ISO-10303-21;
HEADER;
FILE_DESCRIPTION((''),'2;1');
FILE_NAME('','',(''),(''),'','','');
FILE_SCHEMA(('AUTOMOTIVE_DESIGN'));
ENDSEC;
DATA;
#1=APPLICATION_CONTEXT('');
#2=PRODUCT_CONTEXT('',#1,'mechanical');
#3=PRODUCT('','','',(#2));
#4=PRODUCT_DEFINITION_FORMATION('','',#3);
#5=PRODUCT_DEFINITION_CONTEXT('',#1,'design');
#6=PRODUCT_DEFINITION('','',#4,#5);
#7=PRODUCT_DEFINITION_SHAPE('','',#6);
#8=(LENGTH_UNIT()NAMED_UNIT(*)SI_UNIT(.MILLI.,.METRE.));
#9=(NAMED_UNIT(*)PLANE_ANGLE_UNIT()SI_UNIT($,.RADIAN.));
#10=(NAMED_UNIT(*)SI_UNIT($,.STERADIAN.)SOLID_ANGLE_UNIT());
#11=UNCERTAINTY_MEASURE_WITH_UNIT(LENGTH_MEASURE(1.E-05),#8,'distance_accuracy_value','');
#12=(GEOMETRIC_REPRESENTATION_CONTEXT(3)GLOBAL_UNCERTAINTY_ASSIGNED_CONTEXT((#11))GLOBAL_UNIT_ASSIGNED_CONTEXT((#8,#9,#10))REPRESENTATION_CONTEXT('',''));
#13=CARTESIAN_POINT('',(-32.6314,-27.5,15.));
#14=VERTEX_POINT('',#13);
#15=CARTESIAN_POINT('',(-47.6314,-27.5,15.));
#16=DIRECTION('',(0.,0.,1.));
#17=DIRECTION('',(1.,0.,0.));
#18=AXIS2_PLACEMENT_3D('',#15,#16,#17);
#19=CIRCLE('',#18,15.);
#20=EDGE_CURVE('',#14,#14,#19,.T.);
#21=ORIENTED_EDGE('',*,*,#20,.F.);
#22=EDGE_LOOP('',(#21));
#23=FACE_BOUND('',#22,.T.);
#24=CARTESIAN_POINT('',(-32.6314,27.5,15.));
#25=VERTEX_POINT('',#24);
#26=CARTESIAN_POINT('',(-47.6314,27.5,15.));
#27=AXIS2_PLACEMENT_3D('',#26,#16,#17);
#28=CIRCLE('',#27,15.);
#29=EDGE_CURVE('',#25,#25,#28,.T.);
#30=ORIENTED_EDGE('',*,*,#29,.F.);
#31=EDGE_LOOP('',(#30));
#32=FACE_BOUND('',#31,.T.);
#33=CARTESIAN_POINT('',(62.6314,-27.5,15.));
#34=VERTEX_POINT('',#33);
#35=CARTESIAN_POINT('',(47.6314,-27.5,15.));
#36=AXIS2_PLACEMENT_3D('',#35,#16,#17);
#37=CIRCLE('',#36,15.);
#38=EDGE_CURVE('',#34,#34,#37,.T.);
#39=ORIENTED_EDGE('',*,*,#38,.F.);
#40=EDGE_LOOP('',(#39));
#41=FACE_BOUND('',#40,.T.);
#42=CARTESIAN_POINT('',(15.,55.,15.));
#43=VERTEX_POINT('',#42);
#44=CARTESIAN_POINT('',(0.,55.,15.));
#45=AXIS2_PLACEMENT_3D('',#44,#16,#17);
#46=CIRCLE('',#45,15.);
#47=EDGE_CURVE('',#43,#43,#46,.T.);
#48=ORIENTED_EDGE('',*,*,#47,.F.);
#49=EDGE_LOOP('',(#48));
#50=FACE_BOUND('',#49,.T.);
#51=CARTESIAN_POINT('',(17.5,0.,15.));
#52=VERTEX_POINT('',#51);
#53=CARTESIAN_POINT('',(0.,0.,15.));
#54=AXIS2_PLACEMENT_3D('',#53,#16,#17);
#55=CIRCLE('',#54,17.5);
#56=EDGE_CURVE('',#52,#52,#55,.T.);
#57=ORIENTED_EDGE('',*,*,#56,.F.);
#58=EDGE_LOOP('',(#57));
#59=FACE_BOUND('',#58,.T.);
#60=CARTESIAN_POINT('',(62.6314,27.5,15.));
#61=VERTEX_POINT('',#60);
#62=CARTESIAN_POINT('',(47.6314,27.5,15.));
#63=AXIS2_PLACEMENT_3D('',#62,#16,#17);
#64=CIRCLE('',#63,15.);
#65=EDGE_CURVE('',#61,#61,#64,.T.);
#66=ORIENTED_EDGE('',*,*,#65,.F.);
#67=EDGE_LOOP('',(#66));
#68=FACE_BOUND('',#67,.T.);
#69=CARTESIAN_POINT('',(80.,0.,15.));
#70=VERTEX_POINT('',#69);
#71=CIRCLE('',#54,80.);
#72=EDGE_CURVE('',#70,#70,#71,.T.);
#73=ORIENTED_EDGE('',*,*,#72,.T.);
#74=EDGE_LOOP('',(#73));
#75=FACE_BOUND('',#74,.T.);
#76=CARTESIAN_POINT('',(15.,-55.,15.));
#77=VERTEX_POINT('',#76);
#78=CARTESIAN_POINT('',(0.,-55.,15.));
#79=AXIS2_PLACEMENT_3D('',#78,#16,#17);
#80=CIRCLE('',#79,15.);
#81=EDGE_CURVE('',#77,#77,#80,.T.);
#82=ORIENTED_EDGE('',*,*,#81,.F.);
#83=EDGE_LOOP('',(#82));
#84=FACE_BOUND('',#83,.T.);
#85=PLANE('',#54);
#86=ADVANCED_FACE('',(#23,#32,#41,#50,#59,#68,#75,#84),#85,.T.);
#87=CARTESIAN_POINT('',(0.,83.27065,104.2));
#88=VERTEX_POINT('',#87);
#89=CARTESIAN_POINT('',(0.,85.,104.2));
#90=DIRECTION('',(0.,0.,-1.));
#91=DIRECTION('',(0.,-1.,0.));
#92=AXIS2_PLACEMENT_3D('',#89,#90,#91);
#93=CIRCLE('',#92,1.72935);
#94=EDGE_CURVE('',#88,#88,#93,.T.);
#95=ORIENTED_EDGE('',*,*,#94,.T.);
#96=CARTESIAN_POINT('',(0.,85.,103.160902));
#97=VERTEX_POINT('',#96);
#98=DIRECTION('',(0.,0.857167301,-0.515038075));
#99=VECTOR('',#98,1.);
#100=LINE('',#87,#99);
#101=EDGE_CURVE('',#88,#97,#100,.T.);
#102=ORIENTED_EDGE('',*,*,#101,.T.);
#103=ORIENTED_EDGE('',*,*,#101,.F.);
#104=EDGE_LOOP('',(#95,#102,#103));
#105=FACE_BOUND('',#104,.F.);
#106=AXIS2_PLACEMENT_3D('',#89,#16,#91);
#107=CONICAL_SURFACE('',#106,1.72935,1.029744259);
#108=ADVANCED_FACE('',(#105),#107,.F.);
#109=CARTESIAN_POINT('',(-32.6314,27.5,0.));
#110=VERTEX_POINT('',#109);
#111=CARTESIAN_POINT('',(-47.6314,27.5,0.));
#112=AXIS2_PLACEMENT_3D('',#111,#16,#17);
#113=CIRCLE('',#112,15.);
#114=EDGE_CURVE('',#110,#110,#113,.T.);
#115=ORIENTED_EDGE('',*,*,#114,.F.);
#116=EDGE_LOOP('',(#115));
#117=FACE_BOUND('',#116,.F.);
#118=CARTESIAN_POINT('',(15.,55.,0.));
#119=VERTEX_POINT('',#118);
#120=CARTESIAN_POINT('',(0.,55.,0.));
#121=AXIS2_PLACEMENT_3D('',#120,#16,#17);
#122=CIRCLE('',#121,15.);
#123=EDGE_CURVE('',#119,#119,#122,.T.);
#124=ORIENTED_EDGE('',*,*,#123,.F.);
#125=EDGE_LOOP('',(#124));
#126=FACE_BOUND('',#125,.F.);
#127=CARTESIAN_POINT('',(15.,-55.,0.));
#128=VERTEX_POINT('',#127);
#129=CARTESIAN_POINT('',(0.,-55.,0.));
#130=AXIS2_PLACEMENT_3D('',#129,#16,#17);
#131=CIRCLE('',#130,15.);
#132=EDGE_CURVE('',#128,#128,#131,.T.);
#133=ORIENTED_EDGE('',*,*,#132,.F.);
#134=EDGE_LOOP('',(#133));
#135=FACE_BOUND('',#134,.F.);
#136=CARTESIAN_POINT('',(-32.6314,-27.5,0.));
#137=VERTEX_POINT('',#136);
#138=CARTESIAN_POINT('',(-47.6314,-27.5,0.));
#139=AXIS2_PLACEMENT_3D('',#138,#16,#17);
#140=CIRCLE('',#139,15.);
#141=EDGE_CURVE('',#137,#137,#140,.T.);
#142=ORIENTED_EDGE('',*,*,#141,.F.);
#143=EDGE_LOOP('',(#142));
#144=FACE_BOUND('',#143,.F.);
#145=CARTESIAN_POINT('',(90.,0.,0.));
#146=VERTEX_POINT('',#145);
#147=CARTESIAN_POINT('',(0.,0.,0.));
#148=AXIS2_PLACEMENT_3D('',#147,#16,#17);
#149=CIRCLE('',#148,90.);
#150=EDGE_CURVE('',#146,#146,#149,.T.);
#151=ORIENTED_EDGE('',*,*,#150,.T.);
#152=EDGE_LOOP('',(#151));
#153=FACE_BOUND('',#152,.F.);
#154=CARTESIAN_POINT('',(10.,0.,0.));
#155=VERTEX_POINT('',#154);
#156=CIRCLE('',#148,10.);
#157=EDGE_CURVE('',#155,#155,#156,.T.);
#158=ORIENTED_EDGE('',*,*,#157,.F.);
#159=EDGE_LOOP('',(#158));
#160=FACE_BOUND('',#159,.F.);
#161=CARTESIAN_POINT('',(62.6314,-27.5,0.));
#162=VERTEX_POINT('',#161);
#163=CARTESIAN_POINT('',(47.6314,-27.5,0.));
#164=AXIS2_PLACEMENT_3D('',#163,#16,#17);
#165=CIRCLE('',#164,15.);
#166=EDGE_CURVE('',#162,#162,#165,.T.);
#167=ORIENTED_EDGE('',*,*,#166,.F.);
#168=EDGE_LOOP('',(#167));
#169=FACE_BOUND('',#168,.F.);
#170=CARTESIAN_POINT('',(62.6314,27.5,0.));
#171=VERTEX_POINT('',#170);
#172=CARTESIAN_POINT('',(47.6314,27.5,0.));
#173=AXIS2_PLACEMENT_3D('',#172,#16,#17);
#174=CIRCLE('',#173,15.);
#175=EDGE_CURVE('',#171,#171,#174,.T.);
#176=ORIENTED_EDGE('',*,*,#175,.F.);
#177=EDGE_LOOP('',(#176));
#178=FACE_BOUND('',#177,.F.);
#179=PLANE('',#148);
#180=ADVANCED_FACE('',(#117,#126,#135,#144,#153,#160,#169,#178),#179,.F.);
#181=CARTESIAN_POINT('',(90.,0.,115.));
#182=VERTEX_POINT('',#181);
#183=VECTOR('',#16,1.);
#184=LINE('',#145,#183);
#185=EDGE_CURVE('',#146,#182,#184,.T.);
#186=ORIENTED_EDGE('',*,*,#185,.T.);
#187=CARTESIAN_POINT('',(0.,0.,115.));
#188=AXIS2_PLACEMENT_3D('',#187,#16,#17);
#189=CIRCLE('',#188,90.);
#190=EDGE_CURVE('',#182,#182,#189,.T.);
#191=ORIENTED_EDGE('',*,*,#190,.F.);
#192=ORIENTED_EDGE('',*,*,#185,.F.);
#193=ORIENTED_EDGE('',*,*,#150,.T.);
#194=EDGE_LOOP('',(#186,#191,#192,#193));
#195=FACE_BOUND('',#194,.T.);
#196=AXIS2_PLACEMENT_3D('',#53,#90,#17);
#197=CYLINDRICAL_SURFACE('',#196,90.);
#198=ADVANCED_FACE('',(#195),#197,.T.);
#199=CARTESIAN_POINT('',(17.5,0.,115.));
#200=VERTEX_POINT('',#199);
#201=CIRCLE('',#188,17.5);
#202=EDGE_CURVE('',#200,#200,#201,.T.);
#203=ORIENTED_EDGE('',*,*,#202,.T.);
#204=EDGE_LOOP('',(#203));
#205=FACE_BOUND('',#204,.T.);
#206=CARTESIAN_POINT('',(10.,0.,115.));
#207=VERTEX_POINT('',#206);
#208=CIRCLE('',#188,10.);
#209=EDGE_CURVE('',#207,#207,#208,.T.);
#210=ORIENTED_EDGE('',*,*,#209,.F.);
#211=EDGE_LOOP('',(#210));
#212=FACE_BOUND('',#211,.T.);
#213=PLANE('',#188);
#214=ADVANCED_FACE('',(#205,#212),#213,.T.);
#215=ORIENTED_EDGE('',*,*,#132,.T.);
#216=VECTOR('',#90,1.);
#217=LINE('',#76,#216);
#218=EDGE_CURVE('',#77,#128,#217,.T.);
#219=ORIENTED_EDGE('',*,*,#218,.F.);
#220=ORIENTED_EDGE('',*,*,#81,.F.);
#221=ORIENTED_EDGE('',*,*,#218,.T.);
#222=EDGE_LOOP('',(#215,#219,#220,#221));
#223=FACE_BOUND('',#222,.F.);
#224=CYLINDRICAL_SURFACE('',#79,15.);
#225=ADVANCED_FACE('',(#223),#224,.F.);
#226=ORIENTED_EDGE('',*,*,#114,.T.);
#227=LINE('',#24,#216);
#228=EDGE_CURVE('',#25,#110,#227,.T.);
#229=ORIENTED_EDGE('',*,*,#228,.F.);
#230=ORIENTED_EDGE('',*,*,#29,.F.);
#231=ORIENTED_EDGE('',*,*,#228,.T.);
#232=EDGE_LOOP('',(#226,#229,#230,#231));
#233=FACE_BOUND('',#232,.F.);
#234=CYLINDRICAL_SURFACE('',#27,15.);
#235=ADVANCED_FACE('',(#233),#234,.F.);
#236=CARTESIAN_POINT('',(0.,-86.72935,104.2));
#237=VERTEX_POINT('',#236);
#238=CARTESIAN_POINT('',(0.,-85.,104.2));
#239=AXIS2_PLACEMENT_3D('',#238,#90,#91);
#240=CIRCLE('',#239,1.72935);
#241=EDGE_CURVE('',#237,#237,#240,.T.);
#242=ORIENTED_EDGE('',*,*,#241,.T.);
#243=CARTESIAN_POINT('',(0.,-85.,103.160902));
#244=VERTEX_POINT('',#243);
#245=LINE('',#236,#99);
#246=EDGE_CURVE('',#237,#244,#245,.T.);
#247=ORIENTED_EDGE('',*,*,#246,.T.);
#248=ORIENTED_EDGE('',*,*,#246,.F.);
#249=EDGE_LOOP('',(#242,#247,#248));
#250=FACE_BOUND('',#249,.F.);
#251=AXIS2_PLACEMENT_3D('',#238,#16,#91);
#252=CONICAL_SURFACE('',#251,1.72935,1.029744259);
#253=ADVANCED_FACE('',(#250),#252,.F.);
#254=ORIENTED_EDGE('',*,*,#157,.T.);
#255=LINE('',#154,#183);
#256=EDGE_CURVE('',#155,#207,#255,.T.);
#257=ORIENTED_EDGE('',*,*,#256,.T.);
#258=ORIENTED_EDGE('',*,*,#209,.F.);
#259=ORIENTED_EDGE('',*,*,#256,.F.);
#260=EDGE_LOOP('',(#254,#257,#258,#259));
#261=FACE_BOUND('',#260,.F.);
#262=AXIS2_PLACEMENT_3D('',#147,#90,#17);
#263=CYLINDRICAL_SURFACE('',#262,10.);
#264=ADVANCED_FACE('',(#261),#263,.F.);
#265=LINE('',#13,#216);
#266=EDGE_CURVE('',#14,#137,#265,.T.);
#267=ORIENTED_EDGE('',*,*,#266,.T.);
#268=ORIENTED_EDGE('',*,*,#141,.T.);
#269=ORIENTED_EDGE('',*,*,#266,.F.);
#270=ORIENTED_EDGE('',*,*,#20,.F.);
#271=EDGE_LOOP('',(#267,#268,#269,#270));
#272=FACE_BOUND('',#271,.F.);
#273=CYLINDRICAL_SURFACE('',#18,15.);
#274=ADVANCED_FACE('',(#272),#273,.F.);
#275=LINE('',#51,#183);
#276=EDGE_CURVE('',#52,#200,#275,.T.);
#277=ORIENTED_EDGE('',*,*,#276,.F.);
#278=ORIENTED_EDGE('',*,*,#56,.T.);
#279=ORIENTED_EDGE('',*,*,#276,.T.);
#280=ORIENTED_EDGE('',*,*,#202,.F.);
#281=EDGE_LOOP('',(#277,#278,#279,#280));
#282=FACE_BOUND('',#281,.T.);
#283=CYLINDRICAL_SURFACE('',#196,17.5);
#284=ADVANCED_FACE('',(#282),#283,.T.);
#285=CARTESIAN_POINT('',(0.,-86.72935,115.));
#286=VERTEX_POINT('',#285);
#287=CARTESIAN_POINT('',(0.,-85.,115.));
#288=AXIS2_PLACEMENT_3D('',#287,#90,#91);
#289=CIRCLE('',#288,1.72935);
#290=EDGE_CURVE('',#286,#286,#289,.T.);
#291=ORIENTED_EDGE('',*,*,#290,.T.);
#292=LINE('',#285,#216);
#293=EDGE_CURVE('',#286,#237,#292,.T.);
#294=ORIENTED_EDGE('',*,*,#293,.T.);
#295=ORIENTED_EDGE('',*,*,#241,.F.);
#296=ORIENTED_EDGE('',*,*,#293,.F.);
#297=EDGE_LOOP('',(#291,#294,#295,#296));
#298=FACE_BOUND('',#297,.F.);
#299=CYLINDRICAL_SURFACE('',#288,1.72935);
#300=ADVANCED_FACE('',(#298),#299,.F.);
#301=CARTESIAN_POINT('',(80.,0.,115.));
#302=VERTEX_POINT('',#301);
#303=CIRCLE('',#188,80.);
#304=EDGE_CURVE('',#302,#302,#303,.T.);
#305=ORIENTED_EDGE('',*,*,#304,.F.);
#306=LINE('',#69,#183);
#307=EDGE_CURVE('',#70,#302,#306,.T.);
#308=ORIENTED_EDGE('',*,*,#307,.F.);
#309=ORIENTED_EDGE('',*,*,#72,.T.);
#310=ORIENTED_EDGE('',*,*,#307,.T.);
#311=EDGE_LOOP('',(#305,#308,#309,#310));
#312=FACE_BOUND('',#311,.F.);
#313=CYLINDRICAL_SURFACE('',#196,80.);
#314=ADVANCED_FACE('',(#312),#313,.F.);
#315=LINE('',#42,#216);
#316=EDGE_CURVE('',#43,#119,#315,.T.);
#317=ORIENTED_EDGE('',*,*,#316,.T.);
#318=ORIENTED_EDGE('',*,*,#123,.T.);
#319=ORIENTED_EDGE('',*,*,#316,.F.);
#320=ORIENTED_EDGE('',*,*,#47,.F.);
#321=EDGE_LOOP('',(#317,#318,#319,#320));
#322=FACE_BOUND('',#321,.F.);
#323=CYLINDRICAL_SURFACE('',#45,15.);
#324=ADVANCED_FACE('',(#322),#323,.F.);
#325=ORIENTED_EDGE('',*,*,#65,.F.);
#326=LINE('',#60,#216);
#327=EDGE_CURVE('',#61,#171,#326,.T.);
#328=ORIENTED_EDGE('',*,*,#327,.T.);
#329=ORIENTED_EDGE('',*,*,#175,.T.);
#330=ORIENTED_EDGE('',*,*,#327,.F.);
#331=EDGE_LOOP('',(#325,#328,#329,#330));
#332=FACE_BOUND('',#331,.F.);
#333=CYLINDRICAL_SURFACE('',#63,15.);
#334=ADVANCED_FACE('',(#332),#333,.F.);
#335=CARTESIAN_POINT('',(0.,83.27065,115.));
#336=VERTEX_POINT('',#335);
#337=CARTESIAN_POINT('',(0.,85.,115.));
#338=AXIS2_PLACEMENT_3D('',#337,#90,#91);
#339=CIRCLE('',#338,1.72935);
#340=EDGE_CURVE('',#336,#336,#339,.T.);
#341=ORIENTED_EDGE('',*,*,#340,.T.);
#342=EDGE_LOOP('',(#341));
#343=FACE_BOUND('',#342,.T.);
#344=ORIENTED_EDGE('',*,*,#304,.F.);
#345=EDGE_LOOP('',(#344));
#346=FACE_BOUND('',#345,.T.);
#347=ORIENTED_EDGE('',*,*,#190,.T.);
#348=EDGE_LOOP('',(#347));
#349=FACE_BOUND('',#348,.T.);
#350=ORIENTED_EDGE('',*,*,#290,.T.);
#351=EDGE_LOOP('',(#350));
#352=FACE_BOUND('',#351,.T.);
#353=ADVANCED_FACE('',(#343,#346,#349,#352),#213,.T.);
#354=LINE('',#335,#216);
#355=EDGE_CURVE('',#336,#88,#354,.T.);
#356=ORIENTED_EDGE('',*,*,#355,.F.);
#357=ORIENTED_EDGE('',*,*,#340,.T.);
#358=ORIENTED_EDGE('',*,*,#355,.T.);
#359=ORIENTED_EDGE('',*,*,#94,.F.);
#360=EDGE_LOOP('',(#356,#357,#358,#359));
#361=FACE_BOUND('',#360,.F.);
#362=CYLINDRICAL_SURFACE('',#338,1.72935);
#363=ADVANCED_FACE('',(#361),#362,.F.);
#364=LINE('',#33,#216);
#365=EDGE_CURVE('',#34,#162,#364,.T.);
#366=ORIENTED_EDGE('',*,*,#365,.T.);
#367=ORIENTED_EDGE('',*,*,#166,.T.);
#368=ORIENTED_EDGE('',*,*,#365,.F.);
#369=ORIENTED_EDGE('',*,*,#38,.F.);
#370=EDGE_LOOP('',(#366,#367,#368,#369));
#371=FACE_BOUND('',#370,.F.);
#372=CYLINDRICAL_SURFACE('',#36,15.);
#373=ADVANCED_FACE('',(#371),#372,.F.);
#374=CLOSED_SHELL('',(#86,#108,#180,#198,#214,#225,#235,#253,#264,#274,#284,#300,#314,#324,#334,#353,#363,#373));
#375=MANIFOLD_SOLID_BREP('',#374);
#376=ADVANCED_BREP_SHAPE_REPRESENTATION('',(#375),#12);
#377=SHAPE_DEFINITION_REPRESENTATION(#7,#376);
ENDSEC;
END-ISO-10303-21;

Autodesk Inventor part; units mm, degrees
ref_plane "YZ Plane" through (0, 0, 0) normal (1, 0, 0) x (0, 1, 0)
ref_plane "XZ Plane" through (0, 0, 0) normal (0, 1, 0) x (-1, 0, 0)
ref_plane "XY Plane" through (0, 0, 0) normal (0, 0, 1) x (1, 0, 0)
sketch "Sketch1" plane through (0, 0, 0) normal (0, 0, 1) x (1, 0, 0)
  circle A0 centre (0, 0) radius 90
  circle A1 centre (0, 0) radius 10
  dimension "d1" = 20
  dimension "d2" = 180
extrude "Extrusion1" add sketch "Sketch1" along normal blind 15
sketch "Sketch2" plane through (0, 0, 15) normal (0, 0, 1) x (1, 0, 0)
  circle A0 centre (0, 55) radius 25
  circle A1 centre (-47.6314, 27.5) radius 25
  circle A2 centre (-47.6314, -27.5) radius 25
  circle A3 centre (0, -55) radius 25
  circle A4 centre (47.6314, -27.5) radius 25
  circle A5 centre (47.6314, 27.5) radius 25
  circle A6 centre (0, 55) radius 15
  circle A7 centre (-47.6314, 27.5) radius 15
  circle A8 centre (-47.6314, -27.5) radius 15
  circle A9 centre (0, -55) radius 15
  circle A10 centre (47.6314, -27.5) radius 15
  circle A11 centre (47.6314, 27.5) radius 15
  point P0 (0, 0)
  point P1 (0, 0)
  point P2 (0, 0)
  point P3 (0, 0)
  point P4 (0, 0)
  point P5 (0, 0)
  dimension "d5" = 50
  dimension "d6" = 55
  dimension "d9" = 360
  dimension "d11" = 30
  dimension "d14" = 360
extrude "Extrusion2" cut sketch "Sketch2" against normal blind 15 contours A6 | A7 | A8 | A9 | A10 | A11
sketch "Sketch3" plane through (0, 0, 15) normal (0, 0, 1) x (1, 0, 0)
  circle A0 centre (0, 0) radius 90
  circle A1 centre (0, 0) radius 80
  dimension "d18" = 160
  dimension "d19" = 180
extrude "Extrusion3" add sketch "Sketch3" along normal blind 100
sketch "Sketch4" plane through (0, 0, 15) normal (0, 0, 1) x (1, 0, 0)
  circle A0 centre (0, -54.6919) radius 25
  circle A1 centre (47.3646, -27.3459) radius 25
  circle A2 centre (47.3646, 27.3459) radius 25
  circle A3 centre (0, 54.6919) radius 25
  circle A4 centre (-47.3646, 27.3459) radius 25
  circle A5 centre (-47.3646, -27.3459) radius 25
  circle A6 centre (0, 0) radius 17.5
  circle A7 centre (0, 0) radius 10
  dimension "d22" = 50
  dimension "d25" = 360
  dimension "d27" = 35
extrude "Extrusion4" add sketch "Sketch4" along normal blind 100 contours A6 | A7
sketch "Sketch5" plane through (0, 0, 115) normal (0, 0, 1) x (1, 0, 0)
  circle A0 centre (0, 0) radius 10
  dimension "d30" = 20
extrude "Extrusion5" cut sketch "Sketch5" against normal through all
sketch "Sketch8" plane through (0, 0, 115) normal (0, 0, 1) x (1, 0, 0)
  point P0 (0, 0)
  point P1 (0, 85)
  point P2 (0, -85)
  dimension "d37" = 85
  dimension "d38" = 85
hole "Hole1" at (0, 85, 115) at (0, -85, 115) direction (0, 0, -1) diameter 3.4587 depth 10.8 tip angle 118 thread size "M4x0.5" class "6H" standard "ISO Metric profile"
equation "\"BendRadius\" = Thickness"
equation "\"BendReliefWidth\" = Thickness"
equation "\"BendReliefDepth\" = 0.5 * Thickness"
equation "\"CornerReliefSize\" = 4 * Thickness"
equation "\"MinimumRemnant\" = 2 * Thickness"
equation "\"TransitionRadius\" = BendRadius"
equation "\"JacobiRadiusSize\" = BendRadius"
equation "\"GapSize\" = Thickness"
equation "\"Thickness\" = 0.5"
properties part number "Electromagnet cover"
